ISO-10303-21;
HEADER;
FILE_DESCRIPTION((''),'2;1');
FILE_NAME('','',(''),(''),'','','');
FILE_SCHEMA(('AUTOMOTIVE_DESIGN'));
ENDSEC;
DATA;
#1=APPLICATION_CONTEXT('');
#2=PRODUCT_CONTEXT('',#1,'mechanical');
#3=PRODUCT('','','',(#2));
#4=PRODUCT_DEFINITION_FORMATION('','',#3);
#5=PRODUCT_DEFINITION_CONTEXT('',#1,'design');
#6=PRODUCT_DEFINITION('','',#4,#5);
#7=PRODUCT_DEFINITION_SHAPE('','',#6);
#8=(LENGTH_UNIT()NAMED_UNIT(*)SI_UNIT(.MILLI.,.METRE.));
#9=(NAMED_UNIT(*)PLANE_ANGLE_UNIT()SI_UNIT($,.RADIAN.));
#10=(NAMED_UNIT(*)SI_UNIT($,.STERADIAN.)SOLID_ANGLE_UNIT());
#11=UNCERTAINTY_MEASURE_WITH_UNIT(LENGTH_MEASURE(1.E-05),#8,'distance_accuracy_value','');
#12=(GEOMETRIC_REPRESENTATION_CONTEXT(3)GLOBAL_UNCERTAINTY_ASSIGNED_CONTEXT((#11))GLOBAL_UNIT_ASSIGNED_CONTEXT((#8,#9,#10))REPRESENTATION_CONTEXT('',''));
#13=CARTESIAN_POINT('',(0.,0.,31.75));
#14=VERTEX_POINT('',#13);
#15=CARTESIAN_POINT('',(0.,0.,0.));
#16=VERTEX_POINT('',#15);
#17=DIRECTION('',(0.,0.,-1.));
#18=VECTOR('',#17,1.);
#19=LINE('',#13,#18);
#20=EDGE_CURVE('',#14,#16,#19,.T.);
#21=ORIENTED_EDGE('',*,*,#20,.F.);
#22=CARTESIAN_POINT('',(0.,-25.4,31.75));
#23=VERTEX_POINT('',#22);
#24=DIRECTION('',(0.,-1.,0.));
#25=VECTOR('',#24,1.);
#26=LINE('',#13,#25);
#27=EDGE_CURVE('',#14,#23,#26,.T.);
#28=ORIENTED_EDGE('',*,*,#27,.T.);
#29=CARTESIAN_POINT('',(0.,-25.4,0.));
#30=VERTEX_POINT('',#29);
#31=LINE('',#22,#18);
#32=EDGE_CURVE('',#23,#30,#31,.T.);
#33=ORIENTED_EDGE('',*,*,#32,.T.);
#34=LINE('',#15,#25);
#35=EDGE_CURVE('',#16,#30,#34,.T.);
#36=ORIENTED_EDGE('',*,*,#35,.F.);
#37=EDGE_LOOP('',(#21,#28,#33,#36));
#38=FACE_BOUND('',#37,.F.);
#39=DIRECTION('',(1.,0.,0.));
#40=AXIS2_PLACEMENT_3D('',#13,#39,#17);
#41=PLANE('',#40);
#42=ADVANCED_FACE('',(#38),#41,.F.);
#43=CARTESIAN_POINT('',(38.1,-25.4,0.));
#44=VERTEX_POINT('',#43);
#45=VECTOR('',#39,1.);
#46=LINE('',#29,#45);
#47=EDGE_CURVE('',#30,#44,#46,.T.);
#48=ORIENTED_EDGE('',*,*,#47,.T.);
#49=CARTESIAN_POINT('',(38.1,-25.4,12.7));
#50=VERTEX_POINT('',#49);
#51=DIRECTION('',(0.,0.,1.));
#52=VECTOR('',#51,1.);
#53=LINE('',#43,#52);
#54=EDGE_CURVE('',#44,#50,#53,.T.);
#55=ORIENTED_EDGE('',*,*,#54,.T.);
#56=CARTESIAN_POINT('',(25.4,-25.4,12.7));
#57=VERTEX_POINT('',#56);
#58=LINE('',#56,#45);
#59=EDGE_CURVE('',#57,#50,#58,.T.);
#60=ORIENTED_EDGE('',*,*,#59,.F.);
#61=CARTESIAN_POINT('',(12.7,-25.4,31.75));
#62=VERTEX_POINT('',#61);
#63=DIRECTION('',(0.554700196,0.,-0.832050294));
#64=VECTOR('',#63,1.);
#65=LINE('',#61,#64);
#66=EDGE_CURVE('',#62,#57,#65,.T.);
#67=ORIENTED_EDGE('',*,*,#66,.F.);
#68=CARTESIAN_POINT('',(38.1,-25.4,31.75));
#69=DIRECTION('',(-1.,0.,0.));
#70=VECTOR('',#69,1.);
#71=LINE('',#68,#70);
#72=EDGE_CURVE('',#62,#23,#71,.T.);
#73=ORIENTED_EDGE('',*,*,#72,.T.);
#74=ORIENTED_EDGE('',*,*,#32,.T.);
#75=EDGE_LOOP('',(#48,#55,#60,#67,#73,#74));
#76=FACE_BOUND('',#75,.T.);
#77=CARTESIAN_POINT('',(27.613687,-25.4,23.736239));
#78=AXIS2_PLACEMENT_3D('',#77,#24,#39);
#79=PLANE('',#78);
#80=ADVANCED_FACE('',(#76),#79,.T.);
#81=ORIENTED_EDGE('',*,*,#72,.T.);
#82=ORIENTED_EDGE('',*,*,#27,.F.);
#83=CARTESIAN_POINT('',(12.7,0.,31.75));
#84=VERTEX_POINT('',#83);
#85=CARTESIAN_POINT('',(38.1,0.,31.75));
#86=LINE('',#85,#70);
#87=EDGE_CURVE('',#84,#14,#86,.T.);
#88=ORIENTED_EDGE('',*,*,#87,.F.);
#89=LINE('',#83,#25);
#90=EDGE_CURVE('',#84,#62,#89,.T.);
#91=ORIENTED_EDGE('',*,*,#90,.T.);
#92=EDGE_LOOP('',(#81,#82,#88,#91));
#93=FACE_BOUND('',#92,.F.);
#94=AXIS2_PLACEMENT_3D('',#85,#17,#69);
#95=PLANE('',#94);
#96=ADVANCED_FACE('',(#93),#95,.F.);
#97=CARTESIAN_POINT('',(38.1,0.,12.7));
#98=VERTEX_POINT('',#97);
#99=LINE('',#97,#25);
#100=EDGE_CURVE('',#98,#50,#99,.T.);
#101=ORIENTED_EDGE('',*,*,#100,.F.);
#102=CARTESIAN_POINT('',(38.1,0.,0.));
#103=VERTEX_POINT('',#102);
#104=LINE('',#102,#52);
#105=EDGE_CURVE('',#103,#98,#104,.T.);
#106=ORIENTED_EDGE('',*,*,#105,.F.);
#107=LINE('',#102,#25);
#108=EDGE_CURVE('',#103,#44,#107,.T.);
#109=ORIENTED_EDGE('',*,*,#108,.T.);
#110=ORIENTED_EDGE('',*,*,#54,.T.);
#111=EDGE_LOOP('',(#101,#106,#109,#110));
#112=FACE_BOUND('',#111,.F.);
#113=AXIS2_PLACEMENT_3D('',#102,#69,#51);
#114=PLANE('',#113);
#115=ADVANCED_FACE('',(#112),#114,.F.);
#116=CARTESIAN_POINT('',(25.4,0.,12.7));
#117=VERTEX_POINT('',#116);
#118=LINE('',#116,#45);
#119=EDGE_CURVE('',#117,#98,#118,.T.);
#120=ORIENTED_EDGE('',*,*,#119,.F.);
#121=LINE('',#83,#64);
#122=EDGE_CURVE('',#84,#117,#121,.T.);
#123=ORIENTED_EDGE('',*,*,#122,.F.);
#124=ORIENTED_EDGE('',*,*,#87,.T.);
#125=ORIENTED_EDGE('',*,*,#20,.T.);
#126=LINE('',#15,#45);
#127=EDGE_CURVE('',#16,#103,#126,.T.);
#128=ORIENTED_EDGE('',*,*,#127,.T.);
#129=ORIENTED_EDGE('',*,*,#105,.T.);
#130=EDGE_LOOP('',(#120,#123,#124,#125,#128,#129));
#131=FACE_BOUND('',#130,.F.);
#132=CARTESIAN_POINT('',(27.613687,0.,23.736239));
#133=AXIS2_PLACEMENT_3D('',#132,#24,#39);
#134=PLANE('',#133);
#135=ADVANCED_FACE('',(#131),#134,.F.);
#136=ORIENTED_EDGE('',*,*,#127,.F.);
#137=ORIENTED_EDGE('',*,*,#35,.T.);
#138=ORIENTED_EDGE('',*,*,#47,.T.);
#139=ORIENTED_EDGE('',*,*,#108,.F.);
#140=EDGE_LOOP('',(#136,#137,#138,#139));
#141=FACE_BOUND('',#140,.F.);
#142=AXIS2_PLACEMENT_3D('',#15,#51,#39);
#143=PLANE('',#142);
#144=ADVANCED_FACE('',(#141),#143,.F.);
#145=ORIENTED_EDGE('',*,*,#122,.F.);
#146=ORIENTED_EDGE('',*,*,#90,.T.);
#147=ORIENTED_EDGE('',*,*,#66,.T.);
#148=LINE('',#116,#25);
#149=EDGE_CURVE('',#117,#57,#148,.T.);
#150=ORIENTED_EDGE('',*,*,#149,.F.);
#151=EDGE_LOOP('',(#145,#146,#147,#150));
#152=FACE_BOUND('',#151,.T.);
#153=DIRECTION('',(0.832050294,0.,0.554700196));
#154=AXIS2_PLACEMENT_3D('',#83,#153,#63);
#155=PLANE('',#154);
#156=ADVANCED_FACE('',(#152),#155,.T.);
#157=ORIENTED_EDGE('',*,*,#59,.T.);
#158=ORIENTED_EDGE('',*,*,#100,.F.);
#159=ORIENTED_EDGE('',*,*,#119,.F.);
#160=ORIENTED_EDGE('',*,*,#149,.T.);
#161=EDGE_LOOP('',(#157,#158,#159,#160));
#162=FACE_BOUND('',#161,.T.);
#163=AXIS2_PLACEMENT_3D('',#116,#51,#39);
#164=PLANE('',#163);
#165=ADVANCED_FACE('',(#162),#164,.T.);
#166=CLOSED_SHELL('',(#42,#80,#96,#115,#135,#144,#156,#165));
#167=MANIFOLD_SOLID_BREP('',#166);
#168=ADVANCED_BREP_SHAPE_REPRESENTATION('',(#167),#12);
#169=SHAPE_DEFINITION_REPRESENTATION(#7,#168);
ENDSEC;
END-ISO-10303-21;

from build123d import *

# Parameters (mm, degrees)
F1_DEPTH = 25.4
F3_DEPTH = 25.4


# Not quite as in the source:
# - a feature names something its author has since deleted; it is built from what else it names


with BuildPart() as f1:
    # F0 (on Front) → F1 (new body)
    with BuildSketch(Plane.XZ):
        Polygon((38.1, 31.75), (12.7, 31.75), (25.4, 12.7), (38.1, 12.7), align=None)
        Polygon((0, 31.75), (0, 0), (25.4, 0), (38.1, 0), (38.1, 12.7), (25.4, 12.7), (12.7, 31.75), align=None)
    extrude(amount=F1_DEPTH)

    # F0 (on Front) → F3 (cut)
    with BuildSketch(Plane.XZ):
        Polygon((38.1, 31.75), (12.7, 31.75), (25.4, 12.7), (38.1, 12.7), align=None)
    extrude(amount=F3_DEPTH, mode=Mode.SUBTRACT)


solid = f1.part
